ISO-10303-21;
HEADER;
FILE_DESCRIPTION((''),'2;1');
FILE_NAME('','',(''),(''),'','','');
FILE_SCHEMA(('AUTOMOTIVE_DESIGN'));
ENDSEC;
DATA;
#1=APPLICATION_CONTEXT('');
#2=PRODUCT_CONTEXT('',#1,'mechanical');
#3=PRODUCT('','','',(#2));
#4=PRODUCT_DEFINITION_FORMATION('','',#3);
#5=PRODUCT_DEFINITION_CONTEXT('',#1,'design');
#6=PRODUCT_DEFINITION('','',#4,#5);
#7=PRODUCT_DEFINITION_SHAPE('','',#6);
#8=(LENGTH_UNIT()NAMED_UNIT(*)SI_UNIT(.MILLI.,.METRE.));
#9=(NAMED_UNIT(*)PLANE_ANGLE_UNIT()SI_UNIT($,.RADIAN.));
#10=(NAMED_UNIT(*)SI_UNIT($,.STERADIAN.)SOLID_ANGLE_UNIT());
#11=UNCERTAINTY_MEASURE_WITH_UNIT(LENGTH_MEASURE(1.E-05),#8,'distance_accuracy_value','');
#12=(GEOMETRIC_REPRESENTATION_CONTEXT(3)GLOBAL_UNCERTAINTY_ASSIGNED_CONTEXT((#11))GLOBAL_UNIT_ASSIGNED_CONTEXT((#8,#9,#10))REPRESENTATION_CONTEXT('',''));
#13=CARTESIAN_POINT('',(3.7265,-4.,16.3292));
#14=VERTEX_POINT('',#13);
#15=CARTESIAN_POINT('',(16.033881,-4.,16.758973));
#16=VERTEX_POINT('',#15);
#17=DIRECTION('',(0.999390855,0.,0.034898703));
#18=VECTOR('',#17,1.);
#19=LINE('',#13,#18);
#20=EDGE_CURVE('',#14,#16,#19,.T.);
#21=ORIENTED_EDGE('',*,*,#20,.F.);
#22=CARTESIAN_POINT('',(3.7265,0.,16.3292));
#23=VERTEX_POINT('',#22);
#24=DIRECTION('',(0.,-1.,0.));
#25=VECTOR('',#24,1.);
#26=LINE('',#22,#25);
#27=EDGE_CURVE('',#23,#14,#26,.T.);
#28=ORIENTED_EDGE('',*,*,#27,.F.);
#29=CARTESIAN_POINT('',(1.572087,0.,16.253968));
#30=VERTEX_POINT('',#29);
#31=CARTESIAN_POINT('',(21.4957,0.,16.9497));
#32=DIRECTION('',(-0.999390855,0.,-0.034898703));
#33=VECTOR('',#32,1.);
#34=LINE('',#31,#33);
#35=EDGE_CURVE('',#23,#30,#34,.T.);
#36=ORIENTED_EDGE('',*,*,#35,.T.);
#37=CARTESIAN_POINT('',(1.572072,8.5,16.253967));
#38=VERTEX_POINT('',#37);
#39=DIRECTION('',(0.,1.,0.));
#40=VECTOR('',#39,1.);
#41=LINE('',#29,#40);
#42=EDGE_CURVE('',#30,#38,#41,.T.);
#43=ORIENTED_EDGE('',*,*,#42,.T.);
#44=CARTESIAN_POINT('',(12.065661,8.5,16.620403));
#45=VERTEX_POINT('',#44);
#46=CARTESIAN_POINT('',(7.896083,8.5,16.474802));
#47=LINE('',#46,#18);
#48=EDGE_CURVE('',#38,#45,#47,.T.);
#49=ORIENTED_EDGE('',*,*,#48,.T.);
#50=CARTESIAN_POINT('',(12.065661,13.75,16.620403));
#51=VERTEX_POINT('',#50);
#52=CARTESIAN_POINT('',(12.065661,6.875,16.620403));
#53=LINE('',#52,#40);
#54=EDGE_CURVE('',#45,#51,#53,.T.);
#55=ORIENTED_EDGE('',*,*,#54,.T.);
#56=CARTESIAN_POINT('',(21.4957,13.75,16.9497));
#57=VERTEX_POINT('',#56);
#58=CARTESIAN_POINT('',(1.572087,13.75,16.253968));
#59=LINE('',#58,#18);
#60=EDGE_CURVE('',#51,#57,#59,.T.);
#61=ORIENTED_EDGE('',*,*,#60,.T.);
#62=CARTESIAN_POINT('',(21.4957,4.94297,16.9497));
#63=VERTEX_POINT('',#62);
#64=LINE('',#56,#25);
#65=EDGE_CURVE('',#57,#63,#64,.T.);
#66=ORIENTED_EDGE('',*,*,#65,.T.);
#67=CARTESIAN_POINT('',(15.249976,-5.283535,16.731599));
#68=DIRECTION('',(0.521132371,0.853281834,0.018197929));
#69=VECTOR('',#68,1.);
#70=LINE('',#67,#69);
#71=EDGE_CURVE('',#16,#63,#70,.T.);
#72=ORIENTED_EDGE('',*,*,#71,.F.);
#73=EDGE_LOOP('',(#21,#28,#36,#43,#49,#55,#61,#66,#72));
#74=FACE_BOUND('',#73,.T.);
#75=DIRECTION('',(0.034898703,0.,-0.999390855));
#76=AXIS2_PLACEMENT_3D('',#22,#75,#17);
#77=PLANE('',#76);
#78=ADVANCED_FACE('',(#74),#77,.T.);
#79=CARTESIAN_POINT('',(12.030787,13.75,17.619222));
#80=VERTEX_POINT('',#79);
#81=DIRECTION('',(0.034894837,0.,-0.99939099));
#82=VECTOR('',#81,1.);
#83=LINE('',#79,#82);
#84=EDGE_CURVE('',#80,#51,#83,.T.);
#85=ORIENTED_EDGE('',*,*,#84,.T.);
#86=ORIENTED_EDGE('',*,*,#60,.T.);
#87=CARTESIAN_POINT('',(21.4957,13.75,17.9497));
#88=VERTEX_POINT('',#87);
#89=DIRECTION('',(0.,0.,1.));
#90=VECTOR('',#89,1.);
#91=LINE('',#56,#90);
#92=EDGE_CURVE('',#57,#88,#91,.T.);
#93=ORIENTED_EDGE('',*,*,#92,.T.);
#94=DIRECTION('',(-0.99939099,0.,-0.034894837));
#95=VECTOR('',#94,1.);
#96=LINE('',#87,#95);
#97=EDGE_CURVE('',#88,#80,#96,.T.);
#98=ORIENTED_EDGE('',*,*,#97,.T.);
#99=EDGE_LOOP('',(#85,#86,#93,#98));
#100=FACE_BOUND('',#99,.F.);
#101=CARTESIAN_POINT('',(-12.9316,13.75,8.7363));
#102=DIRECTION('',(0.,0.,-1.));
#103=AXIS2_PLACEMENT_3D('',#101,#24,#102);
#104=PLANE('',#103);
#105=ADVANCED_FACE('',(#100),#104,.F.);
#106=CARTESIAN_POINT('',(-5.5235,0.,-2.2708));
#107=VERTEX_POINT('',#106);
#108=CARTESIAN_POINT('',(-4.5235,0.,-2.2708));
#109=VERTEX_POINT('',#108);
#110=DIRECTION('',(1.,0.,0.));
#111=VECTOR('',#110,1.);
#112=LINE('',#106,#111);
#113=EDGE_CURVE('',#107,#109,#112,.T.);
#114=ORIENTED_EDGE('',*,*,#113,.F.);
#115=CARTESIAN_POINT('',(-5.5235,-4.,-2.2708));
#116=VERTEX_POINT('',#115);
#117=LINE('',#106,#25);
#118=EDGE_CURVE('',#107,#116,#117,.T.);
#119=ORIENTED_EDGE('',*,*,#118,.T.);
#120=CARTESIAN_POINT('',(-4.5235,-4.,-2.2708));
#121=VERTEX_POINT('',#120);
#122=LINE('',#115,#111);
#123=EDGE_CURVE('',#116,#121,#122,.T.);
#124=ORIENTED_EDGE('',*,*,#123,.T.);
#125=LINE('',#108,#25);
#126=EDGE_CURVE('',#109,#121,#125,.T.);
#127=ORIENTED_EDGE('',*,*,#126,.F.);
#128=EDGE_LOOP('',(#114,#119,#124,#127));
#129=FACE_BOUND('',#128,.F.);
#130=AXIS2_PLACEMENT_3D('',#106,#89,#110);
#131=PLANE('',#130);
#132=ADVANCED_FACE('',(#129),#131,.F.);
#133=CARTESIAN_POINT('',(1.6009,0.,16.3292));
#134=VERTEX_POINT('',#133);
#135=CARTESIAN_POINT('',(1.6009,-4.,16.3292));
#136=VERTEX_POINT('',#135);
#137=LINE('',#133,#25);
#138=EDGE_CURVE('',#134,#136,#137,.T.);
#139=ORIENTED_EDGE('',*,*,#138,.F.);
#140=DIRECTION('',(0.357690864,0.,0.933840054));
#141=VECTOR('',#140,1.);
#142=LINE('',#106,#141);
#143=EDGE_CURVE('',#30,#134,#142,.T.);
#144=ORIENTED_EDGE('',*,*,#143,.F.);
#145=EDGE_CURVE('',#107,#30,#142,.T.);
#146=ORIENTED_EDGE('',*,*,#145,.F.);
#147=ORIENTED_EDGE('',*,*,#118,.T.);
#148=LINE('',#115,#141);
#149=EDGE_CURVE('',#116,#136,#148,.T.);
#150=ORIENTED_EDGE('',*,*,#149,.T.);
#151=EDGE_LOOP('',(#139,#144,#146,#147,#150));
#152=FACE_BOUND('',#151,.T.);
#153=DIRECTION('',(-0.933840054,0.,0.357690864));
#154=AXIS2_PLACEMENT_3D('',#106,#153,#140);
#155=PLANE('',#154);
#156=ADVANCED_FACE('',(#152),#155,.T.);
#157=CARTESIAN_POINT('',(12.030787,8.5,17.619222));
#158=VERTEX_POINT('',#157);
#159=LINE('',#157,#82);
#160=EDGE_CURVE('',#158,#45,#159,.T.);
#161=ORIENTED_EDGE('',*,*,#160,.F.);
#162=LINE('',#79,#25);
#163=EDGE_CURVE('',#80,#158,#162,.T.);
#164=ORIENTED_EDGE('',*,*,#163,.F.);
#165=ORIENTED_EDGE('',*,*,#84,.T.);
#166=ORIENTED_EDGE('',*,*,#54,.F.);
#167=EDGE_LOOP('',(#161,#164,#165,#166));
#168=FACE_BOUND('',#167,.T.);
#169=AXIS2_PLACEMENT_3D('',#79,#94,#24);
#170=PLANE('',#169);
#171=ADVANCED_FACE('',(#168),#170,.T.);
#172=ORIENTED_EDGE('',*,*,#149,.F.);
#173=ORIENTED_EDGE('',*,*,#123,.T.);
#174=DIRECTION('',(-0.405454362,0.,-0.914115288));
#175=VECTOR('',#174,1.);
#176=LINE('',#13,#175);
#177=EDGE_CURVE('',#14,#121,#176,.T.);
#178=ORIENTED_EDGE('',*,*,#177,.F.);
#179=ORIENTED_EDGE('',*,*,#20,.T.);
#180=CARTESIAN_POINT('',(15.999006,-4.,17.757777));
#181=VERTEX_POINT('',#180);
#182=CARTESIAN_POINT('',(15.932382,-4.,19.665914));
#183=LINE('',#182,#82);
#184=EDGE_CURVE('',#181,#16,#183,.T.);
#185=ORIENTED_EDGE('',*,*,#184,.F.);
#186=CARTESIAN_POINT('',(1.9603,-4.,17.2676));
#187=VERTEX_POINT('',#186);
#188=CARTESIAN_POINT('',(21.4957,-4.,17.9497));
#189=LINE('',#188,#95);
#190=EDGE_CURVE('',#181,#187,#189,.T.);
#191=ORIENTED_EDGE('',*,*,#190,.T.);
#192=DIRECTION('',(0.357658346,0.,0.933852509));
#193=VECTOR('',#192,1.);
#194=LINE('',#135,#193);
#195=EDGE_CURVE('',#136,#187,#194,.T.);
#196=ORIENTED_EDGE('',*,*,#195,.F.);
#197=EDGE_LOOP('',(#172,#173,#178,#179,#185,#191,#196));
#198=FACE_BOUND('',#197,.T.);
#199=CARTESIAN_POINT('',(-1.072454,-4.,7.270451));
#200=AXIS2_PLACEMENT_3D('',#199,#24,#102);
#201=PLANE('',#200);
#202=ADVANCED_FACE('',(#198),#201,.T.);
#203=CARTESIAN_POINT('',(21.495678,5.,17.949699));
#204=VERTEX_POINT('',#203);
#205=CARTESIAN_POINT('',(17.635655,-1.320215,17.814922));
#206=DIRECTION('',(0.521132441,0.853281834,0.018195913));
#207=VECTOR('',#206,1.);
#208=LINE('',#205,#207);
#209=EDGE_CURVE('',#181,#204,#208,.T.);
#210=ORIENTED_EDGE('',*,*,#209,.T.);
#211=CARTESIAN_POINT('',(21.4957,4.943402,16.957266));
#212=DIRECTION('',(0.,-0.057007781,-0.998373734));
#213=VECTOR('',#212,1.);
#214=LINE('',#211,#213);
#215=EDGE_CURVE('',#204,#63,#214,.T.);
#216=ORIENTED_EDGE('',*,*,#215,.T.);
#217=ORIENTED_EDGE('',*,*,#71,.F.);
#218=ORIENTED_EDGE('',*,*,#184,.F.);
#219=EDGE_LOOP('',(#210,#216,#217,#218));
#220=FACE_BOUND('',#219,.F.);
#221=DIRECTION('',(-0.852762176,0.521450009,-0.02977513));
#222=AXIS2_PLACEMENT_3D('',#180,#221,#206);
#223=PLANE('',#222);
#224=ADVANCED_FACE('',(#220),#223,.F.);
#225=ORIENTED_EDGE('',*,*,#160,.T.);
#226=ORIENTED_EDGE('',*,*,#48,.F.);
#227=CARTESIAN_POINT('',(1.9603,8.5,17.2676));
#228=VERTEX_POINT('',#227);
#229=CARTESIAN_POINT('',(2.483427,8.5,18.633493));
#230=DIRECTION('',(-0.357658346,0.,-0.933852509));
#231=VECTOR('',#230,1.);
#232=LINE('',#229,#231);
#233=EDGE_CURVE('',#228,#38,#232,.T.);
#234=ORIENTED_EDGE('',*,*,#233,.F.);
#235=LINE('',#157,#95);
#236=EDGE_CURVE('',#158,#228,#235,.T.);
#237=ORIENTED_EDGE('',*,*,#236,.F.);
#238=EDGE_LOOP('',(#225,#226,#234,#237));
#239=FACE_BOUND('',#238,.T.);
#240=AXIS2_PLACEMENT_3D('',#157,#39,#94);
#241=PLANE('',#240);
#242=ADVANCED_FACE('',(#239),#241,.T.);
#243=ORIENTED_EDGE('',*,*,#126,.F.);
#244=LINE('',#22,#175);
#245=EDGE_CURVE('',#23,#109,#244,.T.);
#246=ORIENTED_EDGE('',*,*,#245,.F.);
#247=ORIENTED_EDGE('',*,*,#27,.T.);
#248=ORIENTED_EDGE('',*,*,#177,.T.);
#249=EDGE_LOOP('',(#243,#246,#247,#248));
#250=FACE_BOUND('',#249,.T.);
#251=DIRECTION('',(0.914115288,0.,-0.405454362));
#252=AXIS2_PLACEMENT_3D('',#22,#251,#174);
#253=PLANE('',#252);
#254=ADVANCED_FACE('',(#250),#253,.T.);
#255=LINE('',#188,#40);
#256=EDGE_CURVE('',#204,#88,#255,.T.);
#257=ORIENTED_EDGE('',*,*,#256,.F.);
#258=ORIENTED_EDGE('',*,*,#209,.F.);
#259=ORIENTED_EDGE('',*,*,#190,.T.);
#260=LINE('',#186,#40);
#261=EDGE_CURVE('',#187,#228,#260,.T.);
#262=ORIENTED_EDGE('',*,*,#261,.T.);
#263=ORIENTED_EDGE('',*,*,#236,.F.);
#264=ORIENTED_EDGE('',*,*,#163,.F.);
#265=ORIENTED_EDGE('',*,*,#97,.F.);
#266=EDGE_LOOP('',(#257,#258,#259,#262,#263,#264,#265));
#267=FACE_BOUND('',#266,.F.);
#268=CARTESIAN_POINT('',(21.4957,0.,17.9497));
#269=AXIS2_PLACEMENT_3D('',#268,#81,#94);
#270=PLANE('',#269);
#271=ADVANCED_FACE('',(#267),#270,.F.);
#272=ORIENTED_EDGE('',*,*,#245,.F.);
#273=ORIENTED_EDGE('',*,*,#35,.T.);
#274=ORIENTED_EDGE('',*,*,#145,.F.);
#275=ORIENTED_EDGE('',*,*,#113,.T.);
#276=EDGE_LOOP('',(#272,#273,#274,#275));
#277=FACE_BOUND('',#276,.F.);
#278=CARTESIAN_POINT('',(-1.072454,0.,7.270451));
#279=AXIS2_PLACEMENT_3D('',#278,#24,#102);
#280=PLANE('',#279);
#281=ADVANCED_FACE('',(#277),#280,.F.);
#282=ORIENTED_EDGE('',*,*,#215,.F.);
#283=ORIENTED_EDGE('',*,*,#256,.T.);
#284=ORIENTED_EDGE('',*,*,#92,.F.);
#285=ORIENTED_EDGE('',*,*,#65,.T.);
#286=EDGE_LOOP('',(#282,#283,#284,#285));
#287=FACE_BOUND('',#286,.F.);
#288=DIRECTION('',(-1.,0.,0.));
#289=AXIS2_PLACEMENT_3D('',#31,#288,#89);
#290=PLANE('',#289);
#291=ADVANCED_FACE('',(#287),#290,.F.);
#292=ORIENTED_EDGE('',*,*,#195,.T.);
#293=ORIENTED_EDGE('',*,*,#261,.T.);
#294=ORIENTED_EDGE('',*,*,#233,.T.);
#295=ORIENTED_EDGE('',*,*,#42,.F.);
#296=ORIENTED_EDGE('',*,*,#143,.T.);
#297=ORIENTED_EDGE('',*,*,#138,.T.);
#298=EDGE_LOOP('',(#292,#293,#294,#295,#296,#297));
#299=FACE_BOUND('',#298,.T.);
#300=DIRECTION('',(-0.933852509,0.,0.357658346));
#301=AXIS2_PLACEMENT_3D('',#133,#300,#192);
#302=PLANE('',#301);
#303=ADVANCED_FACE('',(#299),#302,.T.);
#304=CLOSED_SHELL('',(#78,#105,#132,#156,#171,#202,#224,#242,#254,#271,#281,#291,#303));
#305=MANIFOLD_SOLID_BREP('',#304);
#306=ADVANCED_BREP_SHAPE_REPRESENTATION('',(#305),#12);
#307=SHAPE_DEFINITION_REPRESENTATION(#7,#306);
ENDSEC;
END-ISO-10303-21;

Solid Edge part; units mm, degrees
sketch "Sketch1" plane through (-12.9316, 0, 8.7363) normal (0, -1, 0) x (1, 0, 0)
  line L0 (16.6581, 7.5929) -> (14.5325, 7.5929)
  line L1 (7.4081, -11.0071) -> (14.5325, 7.5929)
  line L2 (7.4081, -11.0071) -> (8.4081, -11.0071)
  line L3 (16.6581, 7.5929) -> (8.4081, -11.0071)
extrude "Protrusion1" add sketch "Sketch1" along normal blind 4
sketch "Sketch2" plane through (-12.9316, 0, 8.7363) normal (0, -1, 0) x (1, 0, 0)
  line L0 (14.5325, 7.5929) -> (14.8919, 8.5313)
  line L1 (34.4273, 9.2134) -> (14.8919, 8.5313)
  line L2 (34.4273, 8.2134) -> (34.4273, 9.2134)
  line L3 (16.6581, 7.5929) -> (34.4273, 8.2134)
extrude "Protrusion2" add sketch "Sketch2" along normal blind 4 material side at (1.8273, 0, 16.7805)
sketch "Sketch3" plane through (-12.9316, 0, 8.7363) normal (0, -1, 0) x (1, 0, 0)
  line L0 (14.5325, 7.5929) -> (14.8919, 8.5313)
  line L1 (34.4273, 9.2134) -> (14.8919, 8.5313)
  line L2 (34.4273, 8.2134) -> (34.4273, 9.2134)
  line L3 (16.6581, 7.5929) -> (34.4273, 8.2134)
extrude "Protrusion3" add sketch "Sketch3" against normal blind 13.75 material side at (1.8273, 0, 16.7805)
sketch "Sketch4" plane through (11.7448, 4.4474, 17.6092) normal (-0.0348995, 0, 0.9993908) x (0.9993908, 0, 0.0348995)
  line L0 (9.7568, -8.4474) -> (9.7568, 0.5526)
  line L1 (4.2568, -8.4474) -> (9.7568, 0.5526)
  line L2 (9.7568, -8.4474) -> (4.2568, -8.4474)
extrude "Cutout1" cut sketch "Sketch4" along normal mid plane 3.8186
sketch "Sketch5" plane through (-0.2942, 14.8774, 17.1888) normal (-0.0348995, 0, 0.9993908) x (0.9993908, 0, 0.0348995)
  line L0 (1.8325, -1.1274) -> (12.3325, -1.1274)
  line L1 (12.3325, -1.1274) -> (12.3325, -6.3774)
  line L2 (12.3325, -6.3774) -> (1.8325, -6.3774)
  line L3 (1.8325, -6.3774) -> (1.8325, -1.1274)
extrude "ExtrudedCutout_2" cut sketch "Sketch5" against normal blind 10.4175
properties material "Stainless Steel, 420"
